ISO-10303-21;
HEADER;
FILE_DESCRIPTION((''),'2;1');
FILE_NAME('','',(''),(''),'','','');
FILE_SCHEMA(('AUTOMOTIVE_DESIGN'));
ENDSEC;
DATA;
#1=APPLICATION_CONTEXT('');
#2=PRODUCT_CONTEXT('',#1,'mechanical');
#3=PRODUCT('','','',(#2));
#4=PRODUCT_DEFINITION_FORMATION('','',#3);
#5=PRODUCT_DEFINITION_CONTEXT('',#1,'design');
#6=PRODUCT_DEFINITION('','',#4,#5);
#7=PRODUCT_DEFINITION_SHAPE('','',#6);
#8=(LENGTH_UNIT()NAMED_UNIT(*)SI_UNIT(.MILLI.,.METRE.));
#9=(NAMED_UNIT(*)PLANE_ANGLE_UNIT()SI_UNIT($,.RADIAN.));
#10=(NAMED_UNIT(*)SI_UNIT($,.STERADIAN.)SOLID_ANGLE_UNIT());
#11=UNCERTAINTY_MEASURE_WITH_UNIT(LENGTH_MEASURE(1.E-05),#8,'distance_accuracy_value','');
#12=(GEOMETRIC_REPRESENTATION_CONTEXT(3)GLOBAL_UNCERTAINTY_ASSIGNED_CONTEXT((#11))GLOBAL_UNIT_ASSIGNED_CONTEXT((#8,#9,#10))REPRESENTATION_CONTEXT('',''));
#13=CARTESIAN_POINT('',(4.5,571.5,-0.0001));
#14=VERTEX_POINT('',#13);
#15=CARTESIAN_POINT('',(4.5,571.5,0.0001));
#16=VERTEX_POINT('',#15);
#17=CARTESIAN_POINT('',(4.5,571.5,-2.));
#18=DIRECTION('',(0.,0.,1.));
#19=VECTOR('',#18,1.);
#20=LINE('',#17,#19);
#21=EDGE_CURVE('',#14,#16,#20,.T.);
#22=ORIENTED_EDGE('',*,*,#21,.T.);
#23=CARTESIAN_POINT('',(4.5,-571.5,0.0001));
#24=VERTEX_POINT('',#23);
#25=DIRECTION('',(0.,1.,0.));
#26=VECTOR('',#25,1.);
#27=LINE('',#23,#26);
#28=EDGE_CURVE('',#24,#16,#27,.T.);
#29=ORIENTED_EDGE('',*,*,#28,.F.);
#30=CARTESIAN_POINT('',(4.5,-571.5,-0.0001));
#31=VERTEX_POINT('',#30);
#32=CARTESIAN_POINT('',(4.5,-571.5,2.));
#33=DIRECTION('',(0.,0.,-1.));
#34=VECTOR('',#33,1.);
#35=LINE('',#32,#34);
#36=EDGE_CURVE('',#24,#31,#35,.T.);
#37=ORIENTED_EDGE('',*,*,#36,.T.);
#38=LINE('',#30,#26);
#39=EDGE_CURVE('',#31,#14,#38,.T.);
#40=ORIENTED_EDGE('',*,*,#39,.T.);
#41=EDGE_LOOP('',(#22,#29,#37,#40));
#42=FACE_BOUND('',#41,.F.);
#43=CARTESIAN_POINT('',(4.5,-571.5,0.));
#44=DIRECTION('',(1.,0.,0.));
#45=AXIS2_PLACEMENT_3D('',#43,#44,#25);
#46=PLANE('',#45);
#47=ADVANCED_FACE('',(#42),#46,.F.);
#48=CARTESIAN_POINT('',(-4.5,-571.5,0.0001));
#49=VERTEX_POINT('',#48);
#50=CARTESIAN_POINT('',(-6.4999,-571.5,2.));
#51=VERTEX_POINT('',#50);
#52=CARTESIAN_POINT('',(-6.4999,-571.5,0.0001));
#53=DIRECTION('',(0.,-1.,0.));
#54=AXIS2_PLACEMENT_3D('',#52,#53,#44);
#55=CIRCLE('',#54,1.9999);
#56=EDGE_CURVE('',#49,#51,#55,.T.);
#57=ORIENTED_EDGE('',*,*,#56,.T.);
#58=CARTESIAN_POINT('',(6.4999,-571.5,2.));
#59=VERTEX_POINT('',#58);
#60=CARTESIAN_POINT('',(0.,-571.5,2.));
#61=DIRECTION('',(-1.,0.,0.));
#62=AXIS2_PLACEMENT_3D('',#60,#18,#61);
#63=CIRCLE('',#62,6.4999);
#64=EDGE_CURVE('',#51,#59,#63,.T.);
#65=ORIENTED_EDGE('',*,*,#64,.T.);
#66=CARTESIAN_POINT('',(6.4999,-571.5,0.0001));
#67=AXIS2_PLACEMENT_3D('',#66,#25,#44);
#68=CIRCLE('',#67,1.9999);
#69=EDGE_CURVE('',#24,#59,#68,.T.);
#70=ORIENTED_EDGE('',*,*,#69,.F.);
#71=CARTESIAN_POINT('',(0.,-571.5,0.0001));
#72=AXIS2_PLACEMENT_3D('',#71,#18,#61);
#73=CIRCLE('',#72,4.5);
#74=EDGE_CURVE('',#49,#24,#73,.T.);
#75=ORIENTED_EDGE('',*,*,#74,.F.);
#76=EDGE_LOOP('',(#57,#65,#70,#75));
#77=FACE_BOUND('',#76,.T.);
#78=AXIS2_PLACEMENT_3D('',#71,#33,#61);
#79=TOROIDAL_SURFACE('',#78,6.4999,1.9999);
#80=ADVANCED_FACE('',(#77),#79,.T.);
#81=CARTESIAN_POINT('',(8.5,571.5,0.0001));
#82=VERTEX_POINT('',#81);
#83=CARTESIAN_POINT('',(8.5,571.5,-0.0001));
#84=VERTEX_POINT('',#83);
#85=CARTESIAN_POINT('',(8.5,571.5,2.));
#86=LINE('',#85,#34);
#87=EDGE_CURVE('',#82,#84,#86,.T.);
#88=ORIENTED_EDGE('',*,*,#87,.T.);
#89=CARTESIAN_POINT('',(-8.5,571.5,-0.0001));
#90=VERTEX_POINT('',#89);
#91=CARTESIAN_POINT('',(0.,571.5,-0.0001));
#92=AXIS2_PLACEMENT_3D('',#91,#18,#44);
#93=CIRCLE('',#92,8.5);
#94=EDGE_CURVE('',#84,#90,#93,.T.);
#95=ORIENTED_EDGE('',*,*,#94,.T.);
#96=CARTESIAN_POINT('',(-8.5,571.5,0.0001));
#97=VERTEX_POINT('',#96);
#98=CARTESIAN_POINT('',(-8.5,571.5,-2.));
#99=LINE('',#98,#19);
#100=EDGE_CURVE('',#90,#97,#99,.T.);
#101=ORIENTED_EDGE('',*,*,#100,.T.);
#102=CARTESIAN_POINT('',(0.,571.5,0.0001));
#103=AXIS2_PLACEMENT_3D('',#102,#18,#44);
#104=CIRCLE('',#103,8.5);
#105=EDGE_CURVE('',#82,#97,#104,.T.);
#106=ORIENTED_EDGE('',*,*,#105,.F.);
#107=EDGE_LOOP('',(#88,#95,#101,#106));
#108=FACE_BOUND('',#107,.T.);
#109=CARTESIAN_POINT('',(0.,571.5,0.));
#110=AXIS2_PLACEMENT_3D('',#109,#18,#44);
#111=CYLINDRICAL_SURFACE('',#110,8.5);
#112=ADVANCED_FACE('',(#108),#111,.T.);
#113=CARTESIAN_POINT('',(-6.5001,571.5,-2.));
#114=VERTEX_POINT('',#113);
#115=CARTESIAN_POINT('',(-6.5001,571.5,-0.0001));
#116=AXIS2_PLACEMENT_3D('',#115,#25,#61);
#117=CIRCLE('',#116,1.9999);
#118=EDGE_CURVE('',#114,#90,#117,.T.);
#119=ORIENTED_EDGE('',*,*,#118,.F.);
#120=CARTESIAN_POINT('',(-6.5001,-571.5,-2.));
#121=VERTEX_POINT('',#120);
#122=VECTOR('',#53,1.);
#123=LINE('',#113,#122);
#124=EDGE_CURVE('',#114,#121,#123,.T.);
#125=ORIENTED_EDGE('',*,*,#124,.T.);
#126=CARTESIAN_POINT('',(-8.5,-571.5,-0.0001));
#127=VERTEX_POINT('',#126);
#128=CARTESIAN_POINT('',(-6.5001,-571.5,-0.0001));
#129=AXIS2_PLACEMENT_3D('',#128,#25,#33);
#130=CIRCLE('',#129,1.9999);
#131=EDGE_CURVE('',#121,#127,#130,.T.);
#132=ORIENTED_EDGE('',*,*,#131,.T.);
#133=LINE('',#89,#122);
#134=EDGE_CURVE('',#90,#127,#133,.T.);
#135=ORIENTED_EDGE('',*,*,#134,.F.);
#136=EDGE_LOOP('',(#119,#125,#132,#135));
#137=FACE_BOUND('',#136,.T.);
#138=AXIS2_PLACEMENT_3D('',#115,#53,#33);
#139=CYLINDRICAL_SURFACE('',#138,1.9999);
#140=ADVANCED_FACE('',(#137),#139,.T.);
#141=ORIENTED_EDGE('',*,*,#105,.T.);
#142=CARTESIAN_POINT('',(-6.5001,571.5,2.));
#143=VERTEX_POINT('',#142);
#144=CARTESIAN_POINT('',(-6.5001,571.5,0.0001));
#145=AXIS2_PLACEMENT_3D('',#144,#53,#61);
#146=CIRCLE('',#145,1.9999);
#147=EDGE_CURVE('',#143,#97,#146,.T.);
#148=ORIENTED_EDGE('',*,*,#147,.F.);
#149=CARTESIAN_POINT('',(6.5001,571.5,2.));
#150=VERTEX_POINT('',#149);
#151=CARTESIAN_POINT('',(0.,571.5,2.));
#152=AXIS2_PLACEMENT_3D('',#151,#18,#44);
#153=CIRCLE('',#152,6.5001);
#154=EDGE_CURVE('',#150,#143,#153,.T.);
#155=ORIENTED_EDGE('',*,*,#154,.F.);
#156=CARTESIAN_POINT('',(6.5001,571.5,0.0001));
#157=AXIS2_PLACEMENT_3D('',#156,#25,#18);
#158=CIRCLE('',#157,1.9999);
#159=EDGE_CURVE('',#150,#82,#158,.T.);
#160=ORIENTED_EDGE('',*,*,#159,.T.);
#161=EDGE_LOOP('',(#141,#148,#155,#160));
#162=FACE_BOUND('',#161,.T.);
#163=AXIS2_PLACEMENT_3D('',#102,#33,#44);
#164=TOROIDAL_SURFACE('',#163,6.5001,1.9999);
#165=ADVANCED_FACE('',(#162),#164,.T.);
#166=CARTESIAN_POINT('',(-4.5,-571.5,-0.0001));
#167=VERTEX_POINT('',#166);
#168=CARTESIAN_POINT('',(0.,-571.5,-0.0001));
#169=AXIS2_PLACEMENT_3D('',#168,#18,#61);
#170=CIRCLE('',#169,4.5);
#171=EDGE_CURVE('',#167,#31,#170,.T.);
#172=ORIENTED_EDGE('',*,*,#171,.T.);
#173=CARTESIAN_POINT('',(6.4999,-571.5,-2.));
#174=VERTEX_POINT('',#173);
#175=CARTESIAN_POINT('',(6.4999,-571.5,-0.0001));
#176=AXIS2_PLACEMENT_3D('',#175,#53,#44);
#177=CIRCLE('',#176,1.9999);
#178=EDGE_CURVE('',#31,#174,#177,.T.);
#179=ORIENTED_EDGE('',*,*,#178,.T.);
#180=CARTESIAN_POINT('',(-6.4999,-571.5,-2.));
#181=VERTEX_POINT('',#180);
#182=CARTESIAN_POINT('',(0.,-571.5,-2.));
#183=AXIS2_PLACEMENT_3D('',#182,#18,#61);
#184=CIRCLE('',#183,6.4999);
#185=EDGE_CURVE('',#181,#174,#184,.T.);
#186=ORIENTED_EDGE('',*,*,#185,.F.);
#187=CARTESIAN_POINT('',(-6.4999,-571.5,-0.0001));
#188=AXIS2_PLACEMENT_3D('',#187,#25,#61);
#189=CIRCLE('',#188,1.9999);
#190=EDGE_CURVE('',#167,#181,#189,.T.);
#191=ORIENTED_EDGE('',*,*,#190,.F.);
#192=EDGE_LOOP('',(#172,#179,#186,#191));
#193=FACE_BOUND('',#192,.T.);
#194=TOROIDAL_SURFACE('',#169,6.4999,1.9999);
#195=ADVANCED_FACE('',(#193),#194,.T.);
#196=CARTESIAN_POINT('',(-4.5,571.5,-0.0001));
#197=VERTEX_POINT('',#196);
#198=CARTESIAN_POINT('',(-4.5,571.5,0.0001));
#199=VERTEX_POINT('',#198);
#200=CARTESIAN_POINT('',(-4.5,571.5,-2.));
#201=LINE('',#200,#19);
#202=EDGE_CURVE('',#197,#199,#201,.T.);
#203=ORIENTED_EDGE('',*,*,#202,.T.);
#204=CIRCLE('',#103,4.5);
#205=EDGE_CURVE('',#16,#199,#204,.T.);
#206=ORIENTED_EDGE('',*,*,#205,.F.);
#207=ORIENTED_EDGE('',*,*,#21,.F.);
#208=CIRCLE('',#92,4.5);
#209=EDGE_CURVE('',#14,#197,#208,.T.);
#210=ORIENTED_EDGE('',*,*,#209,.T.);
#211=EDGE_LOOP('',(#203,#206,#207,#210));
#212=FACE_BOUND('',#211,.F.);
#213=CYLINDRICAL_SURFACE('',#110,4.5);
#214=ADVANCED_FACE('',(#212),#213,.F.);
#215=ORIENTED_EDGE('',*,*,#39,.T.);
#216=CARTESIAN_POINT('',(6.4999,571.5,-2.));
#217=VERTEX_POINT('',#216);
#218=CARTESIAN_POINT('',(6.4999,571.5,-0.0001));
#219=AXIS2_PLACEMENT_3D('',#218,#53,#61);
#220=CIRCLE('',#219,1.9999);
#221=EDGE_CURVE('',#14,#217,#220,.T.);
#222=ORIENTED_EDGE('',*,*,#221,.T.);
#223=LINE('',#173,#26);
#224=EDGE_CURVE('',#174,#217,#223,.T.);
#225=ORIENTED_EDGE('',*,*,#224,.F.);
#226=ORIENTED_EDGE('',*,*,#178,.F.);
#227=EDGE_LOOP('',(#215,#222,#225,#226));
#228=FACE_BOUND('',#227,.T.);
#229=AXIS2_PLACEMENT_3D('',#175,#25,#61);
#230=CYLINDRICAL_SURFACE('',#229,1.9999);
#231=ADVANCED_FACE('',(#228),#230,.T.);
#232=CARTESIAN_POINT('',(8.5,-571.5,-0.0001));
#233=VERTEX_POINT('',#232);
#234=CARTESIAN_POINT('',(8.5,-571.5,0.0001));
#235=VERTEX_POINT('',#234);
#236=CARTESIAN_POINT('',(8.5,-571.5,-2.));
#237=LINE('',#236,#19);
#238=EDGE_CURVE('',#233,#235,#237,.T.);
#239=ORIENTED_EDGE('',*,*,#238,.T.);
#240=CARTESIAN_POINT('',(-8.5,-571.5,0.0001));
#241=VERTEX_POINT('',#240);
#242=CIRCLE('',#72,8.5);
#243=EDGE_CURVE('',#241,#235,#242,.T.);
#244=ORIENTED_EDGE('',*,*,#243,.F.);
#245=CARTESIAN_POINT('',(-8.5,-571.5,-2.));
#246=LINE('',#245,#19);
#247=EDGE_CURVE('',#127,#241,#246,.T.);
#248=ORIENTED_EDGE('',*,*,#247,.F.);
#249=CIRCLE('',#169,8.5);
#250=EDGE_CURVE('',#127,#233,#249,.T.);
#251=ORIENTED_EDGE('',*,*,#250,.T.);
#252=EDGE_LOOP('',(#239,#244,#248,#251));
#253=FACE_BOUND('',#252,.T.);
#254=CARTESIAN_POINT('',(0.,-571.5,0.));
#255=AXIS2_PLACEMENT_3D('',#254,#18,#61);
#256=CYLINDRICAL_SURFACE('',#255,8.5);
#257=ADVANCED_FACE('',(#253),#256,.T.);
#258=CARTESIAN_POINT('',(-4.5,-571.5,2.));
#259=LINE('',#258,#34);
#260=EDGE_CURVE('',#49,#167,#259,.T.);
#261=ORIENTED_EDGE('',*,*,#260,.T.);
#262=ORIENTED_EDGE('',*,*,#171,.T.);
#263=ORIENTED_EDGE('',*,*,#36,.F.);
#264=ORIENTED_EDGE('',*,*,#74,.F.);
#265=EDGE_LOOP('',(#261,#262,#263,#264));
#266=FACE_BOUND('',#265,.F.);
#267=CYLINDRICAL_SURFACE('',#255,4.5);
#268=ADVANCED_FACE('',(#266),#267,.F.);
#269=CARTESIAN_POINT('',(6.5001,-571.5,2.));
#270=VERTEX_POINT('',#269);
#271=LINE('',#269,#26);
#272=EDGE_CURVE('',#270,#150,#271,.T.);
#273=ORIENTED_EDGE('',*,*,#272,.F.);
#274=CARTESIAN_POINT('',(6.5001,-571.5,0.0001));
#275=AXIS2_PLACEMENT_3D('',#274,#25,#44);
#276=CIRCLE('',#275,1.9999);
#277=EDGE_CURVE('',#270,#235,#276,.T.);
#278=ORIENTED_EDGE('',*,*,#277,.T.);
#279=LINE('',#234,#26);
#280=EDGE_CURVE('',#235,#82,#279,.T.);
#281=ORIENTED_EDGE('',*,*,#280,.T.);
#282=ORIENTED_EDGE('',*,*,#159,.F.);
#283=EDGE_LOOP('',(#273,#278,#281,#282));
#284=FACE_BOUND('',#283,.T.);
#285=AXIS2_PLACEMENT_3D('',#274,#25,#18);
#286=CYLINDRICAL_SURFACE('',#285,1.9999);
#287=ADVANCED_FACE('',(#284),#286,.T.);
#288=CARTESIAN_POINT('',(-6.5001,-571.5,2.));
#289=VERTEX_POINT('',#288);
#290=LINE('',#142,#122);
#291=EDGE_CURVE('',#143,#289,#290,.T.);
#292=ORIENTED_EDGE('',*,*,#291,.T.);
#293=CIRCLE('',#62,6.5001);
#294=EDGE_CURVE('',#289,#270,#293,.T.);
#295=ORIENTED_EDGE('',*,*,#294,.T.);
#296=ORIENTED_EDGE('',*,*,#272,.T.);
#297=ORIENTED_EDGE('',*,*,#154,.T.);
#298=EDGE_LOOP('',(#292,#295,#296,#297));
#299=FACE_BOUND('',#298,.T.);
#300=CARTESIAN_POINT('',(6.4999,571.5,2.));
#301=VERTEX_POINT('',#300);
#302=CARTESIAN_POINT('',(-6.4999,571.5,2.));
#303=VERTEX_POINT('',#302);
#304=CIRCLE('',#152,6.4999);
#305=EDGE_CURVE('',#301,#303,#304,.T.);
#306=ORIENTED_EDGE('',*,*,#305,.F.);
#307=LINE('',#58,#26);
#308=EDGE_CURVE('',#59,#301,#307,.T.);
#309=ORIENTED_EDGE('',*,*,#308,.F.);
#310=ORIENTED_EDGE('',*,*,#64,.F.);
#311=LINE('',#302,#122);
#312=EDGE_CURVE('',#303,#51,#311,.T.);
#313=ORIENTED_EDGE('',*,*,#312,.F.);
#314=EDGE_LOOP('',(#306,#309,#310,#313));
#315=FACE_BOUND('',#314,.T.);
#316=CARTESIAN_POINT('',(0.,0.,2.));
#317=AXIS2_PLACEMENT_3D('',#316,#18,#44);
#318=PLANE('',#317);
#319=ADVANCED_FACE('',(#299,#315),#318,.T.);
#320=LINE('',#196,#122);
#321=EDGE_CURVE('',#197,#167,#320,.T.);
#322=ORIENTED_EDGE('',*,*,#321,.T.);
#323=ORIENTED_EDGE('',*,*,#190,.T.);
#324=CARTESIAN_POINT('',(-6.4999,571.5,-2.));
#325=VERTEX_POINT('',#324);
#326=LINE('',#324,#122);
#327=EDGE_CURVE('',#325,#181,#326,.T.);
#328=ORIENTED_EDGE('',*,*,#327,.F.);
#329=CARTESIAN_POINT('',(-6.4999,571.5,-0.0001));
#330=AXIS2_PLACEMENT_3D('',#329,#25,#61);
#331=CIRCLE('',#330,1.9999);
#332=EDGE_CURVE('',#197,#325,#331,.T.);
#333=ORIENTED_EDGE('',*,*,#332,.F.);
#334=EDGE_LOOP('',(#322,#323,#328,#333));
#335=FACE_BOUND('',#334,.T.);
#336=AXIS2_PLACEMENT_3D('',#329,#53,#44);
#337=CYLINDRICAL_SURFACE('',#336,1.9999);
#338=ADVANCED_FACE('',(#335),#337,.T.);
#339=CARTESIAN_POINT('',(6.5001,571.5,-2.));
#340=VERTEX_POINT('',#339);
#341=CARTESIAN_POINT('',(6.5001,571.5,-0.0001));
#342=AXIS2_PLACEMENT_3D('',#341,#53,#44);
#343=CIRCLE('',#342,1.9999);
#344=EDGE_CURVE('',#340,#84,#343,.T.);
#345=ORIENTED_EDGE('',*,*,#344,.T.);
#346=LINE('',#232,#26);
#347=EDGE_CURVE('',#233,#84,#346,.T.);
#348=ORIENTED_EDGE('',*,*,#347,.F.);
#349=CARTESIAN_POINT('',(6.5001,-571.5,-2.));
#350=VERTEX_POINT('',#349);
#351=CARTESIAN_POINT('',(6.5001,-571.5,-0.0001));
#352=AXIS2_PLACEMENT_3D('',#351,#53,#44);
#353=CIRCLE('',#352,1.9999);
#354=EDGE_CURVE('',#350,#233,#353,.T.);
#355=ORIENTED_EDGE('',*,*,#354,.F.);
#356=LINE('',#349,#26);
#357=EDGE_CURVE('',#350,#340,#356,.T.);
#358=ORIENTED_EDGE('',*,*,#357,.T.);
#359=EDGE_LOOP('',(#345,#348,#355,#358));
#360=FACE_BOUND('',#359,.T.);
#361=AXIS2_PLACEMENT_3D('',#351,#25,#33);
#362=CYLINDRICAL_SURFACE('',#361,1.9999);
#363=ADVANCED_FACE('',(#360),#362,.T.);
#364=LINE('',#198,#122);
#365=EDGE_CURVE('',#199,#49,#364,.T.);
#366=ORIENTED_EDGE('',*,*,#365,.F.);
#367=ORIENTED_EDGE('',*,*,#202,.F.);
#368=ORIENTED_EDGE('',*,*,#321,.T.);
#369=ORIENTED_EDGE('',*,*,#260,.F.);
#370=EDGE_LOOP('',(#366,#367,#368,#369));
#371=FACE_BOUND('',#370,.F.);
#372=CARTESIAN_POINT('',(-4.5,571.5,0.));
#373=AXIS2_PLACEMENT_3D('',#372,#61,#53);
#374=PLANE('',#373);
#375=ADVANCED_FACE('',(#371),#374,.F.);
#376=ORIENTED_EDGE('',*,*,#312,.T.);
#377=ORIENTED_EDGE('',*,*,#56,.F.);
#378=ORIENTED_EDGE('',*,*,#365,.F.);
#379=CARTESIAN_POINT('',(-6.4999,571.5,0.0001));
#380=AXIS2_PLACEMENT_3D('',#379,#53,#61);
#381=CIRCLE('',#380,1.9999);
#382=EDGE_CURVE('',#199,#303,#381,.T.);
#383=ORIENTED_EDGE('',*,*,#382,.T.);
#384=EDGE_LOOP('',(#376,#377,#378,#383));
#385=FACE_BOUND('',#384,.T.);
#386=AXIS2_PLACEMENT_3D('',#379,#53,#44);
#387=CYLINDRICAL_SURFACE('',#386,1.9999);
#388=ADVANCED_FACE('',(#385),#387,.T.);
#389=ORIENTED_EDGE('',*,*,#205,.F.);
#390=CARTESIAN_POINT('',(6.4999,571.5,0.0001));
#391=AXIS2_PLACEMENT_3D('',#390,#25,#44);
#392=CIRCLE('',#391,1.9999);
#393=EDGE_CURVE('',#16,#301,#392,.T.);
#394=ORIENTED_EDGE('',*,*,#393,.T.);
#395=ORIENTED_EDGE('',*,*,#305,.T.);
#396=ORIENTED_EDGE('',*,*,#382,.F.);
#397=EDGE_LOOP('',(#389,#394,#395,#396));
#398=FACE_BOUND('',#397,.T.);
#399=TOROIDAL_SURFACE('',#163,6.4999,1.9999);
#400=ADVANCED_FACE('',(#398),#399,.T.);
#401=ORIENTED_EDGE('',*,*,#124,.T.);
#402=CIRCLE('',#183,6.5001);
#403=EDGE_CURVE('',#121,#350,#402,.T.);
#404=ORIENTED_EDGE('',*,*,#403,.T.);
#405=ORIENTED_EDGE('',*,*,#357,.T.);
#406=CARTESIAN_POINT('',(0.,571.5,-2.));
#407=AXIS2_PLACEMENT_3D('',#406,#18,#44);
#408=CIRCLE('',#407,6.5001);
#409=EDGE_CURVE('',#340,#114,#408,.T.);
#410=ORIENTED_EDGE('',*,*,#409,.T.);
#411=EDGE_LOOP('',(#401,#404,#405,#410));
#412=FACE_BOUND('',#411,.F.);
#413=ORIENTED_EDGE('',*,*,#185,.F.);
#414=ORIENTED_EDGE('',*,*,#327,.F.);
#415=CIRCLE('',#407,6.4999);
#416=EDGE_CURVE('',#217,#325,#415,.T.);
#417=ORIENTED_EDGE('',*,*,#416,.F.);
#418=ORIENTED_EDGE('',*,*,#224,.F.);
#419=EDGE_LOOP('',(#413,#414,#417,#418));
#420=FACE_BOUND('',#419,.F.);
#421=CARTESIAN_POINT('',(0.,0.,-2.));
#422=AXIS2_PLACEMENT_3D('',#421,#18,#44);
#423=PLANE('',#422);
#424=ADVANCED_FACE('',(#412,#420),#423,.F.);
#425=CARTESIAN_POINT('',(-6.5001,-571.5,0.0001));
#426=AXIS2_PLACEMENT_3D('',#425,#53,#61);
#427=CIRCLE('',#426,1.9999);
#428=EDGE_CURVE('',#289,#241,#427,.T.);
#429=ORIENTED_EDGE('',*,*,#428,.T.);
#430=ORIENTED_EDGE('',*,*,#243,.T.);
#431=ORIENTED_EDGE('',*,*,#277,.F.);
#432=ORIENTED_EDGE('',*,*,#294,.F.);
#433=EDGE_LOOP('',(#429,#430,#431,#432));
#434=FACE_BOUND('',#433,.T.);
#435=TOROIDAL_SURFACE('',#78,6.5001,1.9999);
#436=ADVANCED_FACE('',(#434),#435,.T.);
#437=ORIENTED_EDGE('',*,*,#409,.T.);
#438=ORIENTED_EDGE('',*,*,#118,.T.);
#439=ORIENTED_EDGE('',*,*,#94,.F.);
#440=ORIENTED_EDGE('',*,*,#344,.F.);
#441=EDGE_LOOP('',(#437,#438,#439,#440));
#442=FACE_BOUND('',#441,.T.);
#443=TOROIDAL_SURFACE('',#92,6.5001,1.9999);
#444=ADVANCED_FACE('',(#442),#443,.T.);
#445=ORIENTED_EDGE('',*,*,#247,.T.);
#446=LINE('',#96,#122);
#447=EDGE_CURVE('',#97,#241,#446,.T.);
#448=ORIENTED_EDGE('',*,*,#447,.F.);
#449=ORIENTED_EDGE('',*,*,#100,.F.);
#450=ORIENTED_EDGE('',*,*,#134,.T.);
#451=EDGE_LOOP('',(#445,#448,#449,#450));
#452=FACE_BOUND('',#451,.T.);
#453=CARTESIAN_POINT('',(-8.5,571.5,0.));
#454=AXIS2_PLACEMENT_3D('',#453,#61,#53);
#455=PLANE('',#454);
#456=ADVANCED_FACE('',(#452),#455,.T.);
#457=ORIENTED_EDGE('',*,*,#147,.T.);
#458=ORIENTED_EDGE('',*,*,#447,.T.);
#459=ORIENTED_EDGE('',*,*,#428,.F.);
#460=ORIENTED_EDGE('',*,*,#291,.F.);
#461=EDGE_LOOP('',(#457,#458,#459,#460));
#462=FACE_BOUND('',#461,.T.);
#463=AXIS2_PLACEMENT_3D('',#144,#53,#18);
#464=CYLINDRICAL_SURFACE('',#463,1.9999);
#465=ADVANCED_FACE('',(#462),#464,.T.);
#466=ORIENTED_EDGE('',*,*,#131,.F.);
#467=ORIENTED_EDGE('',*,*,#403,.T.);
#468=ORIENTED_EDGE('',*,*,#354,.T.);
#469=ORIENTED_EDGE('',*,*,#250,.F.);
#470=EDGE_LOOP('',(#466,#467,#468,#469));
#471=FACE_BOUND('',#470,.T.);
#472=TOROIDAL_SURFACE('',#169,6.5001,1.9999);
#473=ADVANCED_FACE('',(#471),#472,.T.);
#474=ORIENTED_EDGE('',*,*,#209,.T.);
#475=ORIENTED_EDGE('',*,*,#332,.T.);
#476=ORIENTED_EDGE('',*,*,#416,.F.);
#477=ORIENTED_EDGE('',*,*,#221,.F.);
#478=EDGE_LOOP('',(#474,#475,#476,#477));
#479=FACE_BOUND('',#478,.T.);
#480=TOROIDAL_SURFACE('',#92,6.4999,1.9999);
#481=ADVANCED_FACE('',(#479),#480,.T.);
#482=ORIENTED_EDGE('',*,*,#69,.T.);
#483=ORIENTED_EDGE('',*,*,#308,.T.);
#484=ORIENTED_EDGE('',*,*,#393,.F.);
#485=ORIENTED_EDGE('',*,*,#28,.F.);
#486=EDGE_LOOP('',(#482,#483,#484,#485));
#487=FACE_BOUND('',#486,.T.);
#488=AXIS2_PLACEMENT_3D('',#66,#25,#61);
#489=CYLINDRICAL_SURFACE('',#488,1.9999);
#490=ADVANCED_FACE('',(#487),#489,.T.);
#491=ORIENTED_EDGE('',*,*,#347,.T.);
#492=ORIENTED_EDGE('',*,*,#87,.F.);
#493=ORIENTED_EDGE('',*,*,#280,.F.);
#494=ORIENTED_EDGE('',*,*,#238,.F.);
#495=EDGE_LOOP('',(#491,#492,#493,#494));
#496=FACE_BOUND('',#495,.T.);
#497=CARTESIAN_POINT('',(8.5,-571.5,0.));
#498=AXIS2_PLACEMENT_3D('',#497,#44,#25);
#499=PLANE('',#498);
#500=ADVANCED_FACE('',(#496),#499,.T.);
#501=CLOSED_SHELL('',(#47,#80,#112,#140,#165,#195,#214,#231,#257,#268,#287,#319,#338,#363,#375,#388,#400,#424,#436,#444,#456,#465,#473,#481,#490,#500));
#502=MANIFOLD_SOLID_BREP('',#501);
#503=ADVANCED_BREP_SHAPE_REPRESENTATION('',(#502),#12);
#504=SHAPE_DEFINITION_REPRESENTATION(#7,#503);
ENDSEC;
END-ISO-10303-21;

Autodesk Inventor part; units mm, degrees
ref_plane "YZ Plane" through (0, 0, 0) normal (1, 0, 0) x (0, 1, 0)
ref_plane "XZ Plane" through (0, 0, 0) normal (0, 1, 0) x (-1, 0, 0)
ref_plane "XY Plane" through (0, 0, 0) normal (0, 0, 1) x (1, 0, 0)
sketch "Sketch1" plane through (0, 0, 0) normal (0, 0, 1) x (1, 0, 0)
  line L0 (0, 571.5) -> (0, -571.5) construction
  line L1 (-6.5, 571.5) -> (-6.5, -571.5)
  line L2 (6.5, -571.5) -> (6.5, 571.5)
  arc A0 (6.5, 571.5) -> (-6.5, 571.5) centre (0, 571.5) ccw
  arc A1 (-6.5, -571.5) -> (6.5, -571.5) centre (0, -571.5) ccw
  line L3 (-4.5, 571.5) -> (-4.5, -571.5)
  arc A2 (-4.5, -571.5) -> (4.5, -571.5) centre (0, -571.5) ccw
  line L4 (4.5, -571.5) -> (4.5, 571.5)
  arc A3 (4.5, 571.5) -> (-4.5, 571.5) centre (0, 571.5) ccw
  line L5 (-8.5, 571.5) -> (-8.5, -571.5)
  arc A4 (-8.5, -571.5) -> (8.5, -571.5) centre (0, -571.5) ccw
  line L6 (8.5, -571.5) -> (8.5, 571.5)
  arc A5 (8.5, 571.5) -> (-8.5, 571.5) centre (0, 571.5) ccw
  point P0 (0, 0)
  dimension "d0" = 9
  dimension "d2" = 2
  dimension "d3" = 2
  dimension "d4" = 1143
extrude "Extrusion1" add sketch "Sketch1" along normal mid plane 4 contours A0 L2 A1 L1 | A5 L6 A4 L5
fillet "Fillet1" radius 2 16 edges at (0, -580, 2) (8.5, 0, 2) (0, 580, 2) (-8.5, 0, 2) (0, 576, 2) (4.5, 0, 2) (0, -576, 2) (-4.5, 0, 2) (0, -576, -2) (4.5, 0, -2) (0, 576, -2) (-4.5, 0, -2) (0, 580, -2) (8.5, 0, -2) (0, -580, -2) (-8.5, 0, -2)
properties part number "REVLIFT-Test String" material "Nylon 6"
